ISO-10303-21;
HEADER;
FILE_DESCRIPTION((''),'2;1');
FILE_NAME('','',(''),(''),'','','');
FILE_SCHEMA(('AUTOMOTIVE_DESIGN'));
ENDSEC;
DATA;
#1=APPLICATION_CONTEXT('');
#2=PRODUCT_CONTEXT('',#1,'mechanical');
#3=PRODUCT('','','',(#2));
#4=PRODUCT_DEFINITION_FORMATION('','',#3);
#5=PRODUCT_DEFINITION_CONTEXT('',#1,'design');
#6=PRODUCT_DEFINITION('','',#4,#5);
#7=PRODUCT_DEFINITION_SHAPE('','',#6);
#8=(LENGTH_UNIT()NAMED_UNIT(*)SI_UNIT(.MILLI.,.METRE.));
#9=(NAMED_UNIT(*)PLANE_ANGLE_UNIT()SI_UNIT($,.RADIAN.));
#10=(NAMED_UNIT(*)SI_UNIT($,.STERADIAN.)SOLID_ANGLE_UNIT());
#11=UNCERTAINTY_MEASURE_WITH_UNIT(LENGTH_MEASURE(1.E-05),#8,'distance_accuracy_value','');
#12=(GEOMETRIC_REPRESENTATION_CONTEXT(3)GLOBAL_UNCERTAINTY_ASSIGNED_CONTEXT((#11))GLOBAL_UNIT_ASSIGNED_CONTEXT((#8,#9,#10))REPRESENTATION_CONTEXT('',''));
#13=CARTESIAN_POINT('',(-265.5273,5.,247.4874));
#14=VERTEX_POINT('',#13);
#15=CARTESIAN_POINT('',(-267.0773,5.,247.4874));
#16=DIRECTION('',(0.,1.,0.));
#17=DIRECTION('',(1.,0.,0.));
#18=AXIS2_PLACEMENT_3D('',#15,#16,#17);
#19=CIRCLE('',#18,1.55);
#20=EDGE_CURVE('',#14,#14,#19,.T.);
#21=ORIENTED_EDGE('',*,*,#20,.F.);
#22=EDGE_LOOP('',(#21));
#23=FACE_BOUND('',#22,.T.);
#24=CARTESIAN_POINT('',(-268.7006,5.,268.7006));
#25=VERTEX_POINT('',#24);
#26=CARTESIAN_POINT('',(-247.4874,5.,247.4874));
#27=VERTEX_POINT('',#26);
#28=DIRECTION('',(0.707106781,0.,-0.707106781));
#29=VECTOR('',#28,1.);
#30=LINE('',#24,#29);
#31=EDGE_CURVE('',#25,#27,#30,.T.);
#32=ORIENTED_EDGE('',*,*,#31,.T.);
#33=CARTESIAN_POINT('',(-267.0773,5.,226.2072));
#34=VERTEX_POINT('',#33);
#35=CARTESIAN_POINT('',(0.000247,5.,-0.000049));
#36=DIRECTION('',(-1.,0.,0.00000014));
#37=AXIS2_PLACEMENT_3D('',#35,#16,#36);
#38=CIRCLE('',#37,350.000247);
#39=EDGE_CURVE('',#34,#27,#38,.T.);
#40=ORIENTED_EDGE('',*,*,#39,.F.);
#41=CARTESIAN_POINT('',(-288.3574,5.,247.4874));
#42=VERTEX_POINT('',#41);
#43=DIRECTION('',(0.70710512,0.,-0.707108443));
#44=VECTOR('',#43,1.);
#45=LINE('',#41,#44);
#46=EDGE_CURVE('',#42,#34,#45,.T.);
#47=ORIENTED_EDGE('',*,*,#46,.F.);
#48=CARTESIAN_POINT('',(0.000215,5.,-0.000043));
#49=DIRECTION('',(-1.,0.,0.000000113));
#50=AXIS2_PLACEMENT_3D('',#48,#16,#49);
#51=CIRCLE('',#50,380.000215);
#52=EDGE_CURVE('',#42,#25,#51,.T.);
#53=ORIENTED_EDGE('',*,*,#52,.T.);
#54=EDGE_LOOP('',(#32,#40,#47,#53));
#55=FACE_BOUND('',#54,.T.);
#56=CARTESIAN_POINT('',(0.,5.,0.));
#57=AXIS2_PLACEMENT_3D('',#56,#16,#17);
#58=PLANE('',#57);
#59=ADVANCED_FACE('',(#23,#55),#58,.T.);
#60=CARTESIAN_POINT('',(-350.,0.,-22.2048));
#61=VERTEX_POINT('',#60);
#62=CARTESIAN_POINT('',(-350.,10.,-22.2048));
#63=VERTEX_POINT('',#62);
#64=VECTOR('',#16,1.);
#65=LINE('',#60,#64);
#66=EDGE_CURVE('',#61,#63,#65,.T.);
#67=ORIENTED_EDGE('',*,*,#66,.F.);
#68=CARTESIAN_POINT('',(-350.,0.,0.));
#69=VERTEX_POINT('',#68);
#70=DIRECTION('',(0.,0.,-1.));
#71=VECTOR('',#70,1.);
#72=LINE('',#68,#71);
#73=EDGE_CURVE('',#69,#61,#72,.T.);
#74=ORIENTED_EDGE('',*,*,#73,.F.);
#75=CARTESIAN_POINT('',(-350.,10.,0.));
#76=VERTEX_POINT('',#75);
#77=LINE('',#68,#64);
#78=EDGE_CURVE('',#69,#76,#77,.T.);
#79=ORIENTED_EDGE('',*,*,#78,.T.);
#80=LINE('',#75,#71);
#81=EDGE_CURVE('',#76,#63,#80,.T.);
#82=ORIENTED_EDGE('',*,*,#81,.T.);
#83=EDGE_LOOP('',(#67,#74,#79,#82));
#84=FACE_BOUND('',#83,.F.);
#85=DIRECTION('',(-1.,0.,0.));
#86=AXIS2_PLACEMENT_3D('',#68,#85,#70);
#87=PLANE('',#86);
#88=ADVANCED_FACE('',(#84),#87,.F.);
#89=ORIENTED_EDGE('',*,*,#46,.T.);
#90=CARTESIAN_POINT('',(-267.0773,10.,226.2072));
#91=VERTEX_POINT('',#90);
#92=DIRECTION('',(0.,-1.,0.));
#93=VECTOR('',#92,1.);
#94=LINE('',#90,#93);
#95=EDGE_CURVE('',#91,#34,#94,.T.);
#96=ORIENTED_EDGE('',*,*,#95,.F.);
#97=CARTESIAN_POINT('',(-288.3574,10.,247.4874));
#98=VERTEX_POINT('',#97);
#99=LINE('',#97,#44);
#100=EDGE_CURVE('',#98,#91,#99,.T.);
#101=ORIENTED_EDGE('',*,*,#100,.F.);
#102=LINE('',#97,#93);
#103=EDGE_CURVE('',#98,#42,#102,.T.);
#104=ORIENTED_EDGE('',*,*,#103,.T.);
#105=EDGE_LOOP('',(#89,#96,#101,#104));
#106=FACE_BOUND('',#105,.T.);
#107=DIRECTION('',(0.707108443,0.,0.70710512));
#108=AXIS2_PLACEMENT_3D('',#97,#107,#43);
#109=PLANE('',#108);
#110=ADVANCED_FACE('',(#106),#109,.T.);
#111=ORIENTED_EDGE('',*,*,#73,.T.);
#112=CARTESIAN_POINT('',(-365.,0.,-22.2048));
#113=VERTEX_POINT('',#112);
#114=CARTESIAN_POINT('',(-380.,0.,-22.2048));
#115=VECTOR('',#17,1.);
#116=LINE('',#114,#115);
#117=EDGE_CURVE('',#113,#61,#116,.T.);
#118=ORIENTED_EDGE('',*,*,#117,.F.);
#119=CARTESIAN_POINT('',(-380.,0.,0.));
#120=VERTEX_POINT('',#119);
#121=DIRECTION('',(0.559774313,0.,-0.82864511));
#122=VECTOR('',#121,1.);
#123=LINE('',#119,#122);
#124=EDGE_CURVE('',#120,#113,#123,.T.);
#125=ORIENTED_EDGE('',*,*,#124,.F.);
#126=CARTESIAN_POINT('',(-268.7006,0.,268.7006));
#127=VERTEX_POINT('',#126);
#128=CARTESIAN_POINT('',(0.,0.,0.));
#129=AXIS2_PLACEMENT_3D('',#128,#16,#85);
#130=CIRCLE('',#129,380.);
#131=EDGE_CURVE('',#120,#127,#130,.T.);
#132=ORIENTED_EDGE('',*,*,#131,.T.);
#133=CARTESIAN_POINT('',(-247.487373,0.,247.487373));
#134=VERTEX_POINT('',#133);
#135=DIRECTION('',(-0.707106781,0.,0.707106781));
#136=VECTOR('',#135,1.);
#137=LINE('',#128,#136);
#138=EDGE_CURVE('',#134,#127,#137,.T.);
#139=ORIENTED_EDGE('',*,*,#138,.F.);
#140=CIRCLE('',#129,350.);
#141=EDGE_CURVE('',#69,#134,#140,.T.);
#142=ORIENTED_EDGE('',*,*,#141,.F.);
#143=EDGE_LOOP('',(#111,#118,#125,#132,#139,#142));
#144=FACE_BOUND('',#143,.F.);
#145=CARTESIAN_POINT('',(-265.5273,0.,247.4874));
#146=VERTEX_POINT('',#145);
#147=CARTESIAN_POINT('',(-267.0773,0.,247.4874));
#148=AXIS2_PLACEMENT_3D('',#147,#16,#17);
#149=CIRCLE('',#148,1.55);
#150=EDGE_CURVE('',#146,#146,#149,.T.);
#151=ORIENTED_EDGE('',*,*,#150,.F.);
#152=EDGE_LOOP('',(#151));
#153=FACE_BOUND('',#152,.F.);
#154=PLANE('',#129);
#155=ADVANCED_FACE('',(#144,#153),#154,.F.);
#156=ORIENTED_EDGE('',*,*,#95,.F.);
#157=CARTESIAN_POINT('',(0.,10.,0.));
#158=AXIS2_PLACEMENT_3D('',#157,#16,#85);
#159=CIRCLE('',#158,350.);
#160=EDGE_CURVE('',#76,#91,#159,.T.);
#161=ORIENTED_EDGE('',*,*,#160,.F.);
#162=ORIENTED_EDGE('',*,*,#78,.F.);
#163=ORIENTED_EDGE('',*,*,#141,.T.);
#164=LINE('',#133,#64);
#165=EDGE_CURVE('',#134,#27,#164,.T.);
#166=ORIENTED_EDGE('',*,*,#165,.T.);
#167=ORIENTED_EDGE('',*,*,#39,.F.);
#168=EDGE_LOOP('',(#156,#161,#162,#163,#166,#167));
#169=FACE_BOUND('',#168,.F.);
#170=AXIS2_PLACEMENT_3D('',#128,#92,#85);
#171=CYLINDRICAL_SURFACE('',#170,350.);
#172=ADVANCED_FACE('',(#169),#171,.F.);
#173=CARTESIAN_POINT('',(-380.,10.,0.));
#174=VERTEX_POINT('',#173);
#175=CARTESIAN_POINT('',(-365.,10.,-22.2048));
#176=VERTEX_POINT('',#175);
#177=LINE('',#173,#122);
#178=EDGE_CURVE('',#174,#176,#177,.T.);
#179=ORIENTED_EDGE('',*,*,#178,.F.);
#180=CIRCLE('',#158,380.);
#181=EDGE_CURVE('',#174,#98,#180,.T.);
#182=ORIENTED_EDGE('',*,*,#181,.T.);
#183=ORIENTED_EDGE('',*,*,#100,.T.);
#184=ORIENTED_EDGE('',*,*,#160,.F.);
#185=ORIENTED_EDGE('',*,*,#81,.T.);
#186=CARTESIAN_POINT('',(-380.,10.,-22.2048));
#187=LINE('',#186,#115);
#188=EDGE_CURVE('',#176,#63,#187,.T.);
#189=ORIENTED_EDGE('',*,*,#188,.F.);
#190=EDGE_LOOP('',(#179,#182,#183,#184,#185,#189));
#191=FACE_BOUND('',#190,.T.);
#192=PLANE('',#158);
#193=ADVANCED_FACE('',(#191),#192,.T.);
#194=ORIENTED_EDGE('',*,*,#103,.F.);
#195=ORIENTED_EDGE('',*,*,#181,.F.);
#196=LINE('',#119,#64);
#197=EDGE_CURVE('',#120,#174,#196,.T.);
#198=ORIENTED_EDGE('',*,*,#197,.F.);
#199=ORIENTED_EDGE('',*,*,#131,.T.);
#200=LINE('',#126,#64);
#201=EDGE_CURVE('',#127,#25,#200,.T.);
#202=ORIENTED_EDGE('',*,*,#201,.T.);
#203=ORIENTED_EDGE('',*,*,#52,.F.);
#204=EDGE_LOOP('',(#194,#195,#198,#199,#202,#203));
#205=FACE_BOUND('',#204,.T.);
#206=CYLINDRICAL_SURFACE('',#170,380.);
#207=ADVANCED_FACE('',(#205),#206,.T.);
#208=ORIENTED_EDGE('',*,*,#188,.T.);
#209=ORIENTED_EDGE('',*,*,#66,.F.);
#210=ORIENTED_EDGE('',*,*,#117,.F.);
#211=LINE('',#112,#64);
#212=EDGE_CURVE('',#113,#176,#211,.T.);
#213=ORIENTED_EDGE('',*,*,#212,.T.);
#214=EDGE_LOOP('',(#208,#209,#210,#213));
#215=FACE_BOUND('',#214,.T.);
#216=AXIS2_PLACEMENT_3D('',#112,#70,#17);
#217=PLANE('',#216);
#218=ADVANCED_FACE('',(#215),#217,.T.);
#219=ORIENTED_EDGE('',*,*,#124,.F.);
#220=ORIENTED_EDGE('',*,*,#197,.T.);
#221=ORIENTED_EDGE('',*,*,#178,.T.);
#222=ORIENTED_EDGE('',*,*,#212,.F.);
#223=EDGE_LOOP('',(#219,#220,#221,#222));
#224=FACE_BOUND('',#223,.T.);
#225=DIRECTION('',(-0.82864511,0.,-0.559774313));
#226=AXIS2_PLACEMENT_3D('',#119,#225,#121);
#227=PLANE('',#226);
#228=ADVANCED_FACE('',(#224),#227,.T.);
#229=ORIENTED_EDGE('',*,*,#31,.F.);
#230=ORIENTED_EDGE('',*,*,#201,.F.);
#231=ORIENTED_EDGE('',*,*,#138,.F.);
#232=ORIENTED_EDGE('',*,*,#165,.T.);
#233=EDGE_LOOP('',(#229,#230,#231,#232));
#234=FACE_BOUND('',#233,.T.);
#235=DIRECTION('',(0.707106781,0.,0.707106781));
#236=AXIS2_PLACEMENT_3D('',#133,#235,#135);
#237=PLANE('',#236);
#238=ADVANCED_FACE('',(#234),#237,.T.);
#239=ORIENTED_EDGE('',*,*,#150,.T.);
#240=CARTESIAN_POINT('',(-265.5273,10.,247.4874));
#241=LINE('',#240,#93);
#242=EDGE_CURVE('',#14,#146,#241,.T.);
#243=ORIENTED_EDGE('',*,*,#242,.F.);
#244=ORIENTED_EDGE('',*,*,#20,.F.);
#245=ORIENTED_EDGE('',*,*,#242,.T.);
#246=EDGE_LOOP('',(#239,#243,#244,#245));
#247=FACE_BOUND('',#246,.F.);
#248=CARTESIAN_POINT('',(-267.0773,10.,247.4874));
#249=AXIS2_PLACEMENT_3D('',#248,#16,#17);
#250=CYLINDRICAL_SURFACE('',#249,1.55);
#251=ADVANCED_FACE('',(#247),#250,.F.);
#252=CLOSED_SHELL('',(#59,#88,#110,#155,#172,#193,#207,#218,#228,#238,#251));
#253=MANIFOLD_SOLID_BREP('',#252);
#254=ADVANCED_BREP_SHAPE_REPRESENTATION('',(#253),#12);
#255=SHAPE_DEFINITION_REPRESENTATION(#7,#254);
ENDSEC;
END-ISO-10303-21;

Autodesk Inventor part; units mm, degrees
ref_plane "YZ Plane" through (0, 0, 0) normal (1, 0, 0) x (0, 1, 0)
ref_plane "XZ Plane" through (0, 0, 0) normal (0, 1, 0) x (-1, 0, 0)
ref_plane "XY Plane" through (0, 0, 0) normal (0, 0, 1) x (1, 0, 0)
sketch "Sketch1" plane through (0, 0, 0) normal (0, 1, 0) x (-1, 0, 0)
  arc A0 (350, 0) -> (0, 350) centre (0, 0) ccw
  line L0 (350, 0) -> (350, -22.2048)
  line L1 (0, 350) -> (-24.6, 350)
  line L2 (-24.6, 380) -> (0, 380)
  arc A1 (380, 0) -> (0, 380) centre (0, 0) ccw
  line L3 (380, 0) -> (380, -22.2048)
  line L4 (380, -22.2048) -> (350, -22.2048)
  line L5 (-24.6, 380) -> (-24.6, 350)
  line L6 (380, 0) -> (365, -22.2048)
  line L7 (0, 0) -> (268.7006, 268.7006)
  line L8 (0, 0) -> (0, 91.6225)
  point P0 (247.4874, 247.4874)
  dimension "d0" = 350
  dimension "d1" = 374.6
  dimension "d2" = 30
extrude "Extrusion1" add sketch "Sketch1" along normal blind 10 contours A0 L7 A1 L6 L4 L0
sketch "Sketch2" plane through (0, 10, 0) normal (0, 1, 0) x (1, 0, 0)
  line L0 (-350, 22.2048) -> (-365, 22.2048) projected
  line L1 (-365, 22.2048) -> (-380, 0) projected
  arc A0 (-380, 0) -> (-268.7006, -268.7006) centre (0, 0) ccw projected
  line L2 (-268.7006, -268.7006) -> (-247.4874, -247.4874) projected
  arc A1 (-350, 0) -> (-247.4874, -247.4874) centre (0, 0) ccw projected
  line L3 (-350, 0) -> (-350, 22.2048) projected
  line L4 (-288.3574, -247.4874) -> (-267.0773, -226.2072)
extrude "Extrusion2" cut sketch "Sketch2" against normal blind 5 contours A1 L2 A0 L4
sketch "Sketch3" plane through (0, 10, 0) normal (0, 1, 0) x (1, 0, 0)
  arc A0 (-267.0773, -226.2072) -> (-247.4874, -247.4874) centre (0, 0) ccw projected
  line L0 (-288.3574, -247.4874) -> (-267.0773, -226.2072) projected
  arc A1 (-288.3574, -247.4874) -> (-268.7006, -268.7006) centre (0, 0) ccw projected
  line L1 (-247.4874, -247.4874) -> (-268.7006, -268.7006) projected
  circle A2 centre (-267.0773, -247.4874) radius 1.55
  dimension "d7" = 3.1
extrude "Extrusion3" cut sketch "Sketch3" against normal through all contours A2
properties part number "MOLDE_CURVA_1" material "Steel, Mild, Welded"
